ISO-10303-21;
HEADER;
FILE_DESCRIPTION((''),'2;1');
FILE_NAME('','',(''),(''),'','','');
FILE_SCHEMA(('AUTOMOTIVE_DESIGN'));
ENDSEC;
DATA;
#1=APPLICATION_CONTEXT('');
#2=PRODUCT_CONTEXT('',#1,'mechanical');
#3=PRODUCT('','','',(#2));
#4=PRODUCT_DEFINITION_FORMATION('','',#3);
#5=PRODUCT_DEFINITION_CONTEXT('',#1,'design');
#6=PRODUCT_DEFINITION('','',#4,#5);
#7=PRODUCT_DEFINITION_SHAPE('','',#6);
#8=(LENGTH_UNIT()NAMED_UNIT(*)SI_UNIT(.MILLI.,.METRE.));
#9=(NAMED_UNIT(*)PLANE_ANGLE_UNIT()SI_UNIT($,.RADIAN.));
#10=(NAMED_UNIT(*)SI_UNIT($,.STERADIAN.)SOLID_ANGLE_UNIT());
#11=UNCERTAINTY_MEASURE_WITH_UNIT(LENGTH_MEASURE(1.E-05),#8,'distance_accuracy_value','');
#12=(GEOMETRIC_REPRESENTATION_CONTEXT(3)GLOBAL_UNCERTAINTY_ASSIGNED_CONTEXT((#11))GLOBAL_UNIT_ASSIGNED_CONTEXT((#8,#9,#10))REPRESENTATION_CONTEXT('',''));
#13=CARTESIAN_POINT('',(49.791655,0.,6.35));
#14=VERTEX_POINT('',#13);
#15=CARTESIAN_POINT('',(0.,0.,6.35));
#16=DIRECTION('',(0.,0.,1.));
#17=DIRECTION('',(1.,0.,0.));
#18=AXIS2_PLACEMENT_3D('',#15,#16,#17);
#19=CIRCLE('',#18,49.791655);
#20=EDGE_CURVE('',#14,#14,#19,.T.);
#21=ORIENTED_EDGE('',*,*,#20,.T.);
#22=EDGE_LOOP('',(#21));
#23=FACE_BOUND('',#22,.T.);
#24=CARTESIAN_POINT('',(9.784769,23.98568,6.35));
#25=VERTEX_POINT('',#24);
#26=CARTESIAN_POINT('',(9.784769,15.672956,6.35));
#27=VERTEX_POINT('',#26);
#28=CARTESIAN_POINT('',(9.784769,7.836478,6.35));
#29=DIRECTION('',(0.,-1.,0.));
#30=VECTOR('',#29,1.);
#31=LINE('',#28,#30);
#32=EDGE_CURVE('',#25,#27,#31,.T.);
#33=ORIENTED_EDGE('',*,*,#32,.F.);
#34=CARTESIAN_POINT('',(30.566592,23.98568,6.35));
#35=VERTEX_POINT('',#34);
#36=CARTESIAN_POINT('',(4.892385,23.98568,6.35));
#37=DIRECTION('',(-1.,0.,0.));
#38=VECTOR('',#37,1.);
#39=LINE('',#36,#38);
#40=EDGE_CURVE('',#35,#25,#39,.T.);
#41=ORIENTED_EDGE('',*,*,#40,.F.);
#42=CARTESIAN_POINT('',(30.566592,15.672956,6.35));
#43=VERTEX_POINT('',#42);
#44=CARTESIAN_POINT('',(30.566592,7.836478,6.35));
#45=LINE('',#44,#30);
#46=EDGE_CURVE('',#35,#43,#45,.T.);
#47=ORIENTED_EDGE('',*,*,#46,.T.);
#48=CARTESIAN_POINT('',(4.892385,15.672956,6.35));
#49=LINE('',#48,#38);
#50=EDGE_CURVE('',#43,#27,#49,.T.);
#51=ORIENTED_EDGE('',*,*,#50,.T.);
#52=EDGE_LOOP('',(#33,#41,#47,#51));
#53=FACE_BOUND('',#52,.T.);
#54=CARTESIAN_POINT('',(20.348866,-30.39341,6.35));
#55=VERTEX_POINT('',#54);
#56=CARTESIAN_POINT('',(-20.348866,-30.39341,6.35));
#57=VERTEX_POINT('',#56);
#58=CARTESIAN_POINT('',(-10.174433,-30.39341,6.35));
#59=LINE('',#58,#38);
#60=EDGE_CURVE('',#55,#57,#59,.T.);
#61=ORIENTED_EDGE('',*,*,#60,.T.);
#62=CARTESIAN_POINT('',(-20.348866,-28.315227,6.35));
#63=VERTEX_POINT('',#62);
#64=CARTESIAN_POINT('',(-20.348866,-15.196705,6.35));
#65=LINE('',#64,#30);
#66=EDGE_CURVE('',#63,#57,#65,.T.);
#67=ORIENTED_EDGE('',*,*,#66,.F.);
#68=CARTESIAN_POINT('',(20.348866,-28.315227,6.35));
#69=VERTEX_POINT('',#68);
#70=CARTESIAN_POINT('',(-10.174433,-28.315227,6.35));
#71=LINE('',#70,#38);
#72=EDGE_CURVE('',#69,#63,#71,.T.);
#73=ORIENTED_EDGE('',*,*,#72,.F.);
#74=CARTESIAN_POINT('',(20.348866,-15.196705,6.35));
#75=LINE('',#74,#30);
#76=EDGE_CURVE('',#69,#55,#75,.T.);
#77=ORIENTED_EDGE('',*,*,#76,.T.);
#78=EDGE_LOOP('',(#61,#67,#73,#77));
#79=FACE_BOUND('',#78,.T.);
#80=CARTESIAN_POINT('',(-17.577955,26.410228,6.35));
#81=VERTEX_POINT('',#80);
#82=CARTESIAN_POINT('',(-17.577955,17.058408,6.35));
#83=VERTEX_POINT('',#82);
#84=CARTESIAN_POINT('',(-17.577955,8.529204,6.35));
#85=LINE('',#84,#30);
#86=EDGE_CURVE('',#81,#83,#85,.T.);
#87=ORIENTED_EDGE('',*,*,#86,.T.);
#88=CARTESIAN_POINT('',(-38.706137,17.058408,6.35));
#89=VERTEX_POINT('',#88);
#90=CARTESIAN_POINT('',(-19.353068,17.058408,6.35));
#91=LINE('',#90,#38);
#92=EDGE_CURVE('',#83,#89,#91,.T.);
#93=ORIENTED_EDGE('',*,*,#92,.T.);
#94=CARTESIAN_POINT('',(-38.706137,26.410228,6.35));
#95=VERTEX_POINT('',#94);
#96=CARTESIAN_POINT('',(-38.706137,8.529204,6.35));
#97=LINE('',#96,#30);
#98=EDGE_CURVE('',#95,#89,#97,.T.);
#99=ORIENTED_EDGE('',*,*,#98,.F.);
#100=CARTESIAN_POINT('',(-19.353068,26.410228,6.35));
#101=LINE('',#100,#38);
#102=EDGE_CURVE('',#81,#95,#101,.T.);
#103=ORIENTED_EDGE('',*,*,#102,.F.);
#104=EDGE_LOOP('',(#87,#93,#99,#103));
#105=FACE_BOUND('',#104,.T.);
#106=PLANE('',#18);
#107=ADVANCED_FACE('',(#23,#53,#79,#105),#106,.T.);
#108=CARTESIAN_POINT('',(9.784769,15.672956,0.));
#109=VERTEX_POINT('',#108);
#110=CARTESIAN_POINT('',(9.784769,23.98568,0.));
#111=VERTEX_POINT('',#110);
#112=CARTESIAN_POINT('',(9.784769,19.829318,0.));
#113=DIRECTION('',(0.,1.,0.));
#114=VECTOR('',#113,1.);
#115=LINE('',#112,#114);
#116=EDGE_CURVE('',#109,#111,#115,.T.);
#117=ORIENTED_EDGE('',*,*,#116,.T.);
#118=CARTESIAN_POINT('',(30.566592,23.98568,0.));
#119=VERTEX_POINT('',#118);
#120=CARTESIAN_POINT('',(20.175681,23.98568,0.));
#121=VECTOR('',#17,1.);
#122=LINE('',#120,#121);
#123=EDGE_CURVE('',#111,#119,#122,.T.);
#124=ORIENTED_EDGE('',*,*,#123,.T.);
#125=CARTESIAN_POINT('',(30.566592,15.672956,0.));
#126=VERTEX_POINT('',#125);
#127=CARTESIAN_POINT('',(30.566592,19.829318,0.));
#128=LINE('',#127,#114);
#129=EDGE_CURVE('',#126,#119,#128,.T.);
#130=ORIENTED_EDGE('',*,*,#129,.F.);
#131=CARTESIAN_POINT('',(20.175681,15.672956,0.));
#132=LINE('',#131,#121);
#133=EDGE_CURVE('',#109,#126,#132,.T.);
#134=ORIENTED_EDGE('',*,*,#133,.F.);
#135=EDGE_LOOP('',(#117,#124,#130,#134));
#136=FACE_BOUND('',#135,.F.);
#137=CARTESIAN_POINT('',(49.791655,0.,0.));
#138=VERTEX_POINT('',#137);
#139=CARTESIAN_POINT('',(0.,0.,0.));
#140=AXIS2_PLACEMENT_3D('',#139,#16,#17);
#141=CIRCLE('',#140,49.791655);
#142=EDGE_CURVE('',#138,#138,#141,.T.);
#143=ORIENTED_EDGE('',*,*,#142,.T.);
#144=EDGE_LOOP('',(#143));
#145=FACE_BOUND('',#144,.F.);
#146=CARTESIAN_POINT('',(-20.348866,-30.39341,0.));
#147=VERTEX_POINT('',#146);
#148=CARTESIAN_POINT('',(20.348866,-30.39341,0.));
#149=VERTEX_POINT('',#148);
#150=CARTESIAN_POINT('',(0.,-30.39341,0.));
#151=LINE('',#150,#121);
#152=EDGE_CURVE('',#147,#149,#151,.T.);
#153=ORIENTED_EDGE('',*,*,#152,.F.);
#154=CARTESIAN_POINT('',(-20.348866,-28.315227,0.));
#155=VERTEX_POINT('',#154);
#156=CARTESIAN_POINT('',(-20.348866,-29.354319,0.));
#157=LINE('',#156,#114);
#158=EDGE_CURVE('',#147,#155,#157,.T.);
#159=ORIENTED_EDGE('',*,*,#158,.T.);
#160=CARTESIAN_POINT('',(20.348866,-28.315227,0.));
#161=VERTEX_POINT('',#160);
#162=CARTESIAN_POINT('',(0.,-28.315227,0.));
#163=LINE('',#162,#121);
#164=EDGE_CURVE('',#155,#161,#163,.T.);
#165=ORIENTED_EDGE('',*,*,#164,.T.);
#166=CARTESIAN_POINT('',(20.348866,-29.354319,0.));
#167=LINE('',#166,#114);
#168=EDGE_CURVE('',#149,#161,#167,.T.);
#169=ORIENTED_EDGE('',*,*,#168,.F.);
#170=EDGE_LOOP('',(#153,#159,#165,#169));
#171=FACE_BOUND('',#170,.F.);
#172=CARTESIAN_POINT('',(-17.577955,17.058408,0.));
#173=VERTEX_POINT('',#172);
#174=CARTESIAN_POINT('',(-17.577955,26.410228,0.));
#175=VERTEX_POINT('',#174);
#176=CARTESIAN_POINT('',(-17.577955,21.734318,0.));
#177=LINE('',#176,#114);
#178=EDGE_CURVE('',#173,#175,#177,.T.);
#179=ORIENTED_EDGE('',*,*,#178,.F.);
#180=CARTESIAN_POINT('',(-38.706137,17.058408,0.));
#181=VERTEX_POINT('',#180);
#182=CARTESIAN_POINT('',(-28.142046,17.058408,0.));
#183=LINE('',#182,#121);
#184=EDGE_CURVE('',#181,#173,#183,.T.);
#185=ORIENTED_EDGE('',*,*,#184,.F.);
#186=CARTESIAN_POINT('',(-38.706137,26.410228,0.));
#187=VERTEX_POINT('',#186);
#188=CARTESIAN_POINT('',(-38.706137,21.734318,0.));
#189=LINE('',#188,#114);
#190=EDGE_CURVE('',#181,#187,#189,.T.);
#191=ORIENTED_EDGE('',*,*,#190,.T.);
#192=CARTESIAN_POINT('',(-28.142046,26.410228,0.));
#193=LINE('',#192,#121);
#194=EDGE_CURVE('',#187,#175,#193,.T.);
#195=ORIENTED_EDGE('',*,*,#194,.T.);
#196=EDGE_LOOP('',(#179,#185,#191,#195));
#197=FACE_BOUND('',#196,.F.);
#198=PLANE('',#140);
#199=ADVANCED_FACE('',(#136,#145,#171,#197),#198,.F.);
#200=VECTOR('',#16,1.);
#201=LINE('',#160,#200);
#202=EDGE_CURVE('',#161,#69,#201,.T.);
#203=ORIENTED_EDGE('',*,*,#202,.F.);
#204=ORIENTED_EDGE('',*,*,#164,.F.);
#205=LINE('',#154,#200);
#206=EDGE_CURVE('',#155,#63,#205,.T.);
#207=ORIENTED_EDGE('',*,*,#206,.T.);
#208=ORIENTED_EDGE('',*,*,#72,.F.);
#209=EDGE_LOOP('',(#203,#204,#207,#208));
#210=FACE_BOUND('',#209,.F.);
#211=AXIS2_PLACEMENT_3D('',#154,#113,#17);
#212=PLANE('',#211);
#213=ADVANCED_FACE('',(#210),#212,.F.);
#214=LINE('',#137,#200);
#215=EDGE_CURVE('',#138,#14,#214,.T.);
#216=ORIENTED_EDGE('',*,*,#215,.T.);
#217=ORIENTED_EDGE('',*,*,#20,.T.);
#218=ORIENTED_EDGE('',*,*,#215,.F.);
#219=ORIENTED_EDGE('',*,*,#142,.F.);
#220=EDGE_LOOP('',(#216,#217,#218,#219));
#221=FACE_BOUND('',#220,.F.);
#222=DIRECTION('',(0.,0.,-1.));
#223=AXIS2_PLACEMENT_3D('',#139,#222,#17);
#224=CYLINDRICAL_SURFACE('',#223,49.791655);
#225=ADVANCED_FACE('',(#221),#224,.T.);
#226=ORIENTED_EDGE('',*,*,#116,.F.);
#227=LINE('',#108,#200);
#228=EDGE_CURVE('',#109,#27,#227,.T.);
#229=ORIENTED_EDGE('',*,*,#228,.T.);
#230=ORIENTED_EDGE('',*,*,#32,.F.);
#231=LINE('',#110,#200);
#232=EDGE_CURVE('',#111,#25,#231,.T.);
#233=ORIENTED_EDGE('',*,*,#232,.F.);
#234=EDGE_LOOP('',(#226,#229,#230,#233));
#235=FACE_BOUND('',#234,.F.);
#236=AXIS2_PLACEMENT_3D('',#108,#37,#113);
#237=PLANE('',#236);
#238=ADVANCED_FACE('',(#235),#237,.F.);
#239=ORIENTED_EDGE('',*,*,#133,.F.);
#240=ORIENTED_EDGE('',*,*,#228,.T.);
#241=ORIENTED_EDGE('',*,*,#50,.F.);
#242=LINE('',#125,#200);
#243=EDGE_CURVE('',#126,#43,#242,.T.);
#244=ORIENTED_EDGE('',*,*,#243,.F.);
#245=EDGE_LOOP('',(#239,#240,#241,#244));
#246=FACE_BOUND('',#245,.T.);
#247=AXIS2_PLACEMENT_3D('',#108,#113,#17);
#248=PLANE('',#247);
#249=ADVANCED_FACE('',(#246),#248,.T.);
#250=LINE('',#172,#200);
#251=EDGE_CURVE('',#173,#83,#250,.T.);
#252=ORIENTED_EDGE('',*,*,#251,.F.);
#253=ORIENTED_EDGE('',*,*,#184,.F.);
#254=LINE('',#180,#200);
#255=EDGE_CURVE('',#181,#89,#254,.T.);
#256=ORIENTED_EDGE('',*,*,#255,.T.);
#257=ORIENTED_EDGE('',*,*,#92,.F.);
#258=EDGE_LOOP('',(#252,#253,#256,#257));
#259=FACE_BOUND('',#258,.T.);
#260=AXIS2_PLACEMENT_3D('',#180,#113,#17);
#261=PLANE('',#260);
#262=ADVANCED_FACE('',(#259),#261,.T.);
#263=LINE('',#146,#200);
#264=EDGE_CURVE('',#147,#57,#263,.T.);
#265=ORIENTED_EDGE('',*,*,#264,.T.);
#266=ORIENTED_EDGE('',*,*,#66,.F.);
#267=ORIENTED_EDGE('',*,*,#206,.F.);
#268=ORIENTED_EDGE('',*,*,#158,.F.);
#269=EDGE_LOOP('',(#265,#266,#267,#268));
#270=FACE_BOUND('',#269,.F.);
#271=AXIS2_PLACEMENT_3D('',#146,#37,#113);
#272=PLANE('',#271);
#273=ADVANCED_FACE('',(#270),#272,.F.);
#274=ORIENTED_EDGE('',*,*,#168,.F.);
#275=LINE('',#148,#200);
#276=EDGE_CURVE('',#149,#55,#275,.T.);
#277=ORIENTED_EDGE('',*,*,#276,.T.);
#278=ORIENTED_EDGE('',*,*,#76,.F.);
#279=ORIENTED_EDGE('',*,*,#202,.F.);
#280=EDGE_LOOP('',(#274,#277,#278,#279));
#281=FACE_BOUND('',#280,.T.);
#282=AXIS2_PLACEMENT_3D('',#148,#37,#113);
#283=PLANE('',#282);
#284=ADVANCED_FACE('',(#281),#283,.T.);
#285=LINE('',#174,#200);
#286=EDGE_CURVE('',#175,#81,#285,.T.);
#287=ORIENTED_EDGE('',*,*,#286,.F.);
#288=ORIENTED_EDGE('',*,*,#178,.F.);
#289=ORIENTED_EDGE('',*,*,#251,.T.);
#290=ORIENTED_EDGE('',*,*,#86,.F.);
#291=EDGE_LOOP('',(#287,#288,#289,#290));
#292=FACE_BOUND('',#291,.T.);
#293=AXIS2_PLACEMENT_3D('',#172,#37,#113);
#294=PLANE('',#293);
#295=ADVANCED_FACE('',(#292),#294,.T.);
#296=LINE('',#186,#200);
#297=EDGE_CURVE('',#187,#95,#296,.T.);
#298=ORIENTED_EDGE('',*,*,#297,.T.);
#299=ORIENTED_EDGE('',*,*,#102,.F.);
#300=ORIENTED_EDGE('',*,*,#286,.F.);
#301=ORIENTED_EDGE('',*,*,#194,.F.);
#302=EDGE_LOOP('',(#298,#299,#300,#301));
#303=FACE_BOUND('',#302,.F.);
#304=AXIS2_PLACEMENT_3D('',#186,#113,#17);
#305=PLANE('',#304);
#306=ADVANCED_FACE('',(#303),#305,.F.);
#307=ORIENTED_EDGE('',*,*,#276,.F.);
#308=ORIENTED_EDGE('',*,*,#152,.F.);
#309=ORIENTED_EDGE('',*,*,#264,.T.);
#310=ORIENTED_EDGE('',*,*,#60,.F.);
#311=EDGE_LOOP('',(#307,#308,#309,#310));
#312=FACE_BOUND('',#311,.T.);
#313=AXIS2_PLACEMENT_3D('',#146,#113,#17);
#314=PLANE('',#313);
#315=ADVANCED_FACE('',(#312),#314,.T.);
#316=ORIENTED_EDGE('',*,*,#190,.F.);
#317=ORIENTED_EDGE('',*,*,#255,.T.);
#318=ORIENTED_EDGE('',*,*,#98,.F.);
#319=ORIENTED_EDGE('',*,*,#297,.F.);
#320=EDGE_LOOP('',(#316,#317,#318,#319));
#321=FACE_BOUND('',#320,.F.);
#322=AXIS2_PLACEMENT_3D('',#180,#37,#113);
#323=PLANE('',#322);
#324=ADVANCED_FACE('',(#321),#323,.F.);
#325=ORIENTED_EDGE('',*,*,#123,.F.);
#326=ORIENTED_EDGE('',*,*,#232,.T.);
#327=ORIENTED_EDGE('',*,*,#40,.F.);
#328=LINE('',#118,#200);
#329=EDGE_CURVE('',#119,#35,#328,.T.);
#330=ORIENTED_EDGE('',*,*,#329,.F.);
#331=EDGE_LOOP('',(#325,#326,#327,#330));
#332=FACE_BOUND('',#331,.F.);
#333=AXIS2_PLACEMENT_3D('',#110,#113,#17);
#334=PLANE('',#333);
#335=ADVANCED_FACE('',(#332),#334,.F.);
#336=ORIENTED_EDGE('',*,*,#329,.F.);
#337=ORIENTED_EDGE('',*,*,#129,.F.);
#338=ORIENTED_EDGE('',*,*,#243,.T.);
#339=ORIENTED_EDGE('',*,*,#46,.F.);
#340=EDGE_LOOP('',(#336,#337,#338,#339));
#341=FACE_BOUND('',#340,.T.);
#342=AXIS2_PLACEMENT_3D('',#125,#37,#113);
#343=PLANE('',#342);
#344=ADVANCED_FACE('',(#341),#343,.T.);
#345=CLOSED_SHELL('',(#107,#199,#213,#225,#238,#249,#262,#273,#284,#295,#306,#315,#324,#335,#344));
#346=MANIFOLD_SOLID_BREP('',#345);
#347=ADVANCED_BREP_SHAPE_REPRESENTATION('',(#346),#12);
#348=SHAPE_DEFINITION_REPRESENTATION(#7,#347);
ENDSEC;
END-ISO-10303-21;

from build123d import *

# Parameters (mm, degrees)
F0_R     = 49.7916549323
F2_DEPTH = 6.35
F1_W     = 21.1281813681
F1_H     = 9.3518197536
F3_DEPTH = 6.351
F4_W     = 20.7818225026
F4_H     = 8.3127245307
F5_DEPTH = 6.351
F6_W     = 43.4686355293
F6_H     = 2.7709081769
F7_DEPTH = 145
F8_W     = 40.6977310777
F8_H     = 2.0781829953
F9_DEPTH = 6.351


# Not quite as in the source:
# - an extrude ends at something that could not be found from the text; its depth is read off the source's solid


with BuildPart() as f2:
    # F0 (on Top) → F2 (new body)
    with BuildSketch(Plane.XY):
        Circle(F0_R)
    extrude(amount=F2_DEPTH)

    # F1 (on face) → F3 (cut, through all)
    with BuildSketch(Plane.XY):
        with Locations((-28.1420461833, 21.7343177646)):
            Rectangle(F1_W, F1_H)
    extrude(amount=F3_DEPTH, mode=Mode.SUBTRACT)

    # F4 (on Top) → F5 (cut, through all)
    with BuildSketch(Plane.XY):
        with Locations((20.1756805182, 19.8293179274)):
            Rectangle(F4_W, F4_H)
    extrude(amount=F5_DEPTH, mode=Mode.SUBTRACT)

    # F6 (on face) → F7 (cut, through all)
    with BuildSketch(Plane.XY.offset(6.35)):
        with Locations((0, -21.9075009227)):
            Rectangle(F6_W, F6_H)
    extrude(amount=F7_DEPTH, mode=Mode.SUBTRACT)

    # F8 (on Top) → F9 (cut, through all)
    with BuildSketch(Plane.XY):
        with Locations((0, -29.3543189764)):
            Rectangle(F8_W, F8_H)
    extrude(amount=F9_DEPTH, mode=Mode.SUBTRACT)


solid = f2.part
